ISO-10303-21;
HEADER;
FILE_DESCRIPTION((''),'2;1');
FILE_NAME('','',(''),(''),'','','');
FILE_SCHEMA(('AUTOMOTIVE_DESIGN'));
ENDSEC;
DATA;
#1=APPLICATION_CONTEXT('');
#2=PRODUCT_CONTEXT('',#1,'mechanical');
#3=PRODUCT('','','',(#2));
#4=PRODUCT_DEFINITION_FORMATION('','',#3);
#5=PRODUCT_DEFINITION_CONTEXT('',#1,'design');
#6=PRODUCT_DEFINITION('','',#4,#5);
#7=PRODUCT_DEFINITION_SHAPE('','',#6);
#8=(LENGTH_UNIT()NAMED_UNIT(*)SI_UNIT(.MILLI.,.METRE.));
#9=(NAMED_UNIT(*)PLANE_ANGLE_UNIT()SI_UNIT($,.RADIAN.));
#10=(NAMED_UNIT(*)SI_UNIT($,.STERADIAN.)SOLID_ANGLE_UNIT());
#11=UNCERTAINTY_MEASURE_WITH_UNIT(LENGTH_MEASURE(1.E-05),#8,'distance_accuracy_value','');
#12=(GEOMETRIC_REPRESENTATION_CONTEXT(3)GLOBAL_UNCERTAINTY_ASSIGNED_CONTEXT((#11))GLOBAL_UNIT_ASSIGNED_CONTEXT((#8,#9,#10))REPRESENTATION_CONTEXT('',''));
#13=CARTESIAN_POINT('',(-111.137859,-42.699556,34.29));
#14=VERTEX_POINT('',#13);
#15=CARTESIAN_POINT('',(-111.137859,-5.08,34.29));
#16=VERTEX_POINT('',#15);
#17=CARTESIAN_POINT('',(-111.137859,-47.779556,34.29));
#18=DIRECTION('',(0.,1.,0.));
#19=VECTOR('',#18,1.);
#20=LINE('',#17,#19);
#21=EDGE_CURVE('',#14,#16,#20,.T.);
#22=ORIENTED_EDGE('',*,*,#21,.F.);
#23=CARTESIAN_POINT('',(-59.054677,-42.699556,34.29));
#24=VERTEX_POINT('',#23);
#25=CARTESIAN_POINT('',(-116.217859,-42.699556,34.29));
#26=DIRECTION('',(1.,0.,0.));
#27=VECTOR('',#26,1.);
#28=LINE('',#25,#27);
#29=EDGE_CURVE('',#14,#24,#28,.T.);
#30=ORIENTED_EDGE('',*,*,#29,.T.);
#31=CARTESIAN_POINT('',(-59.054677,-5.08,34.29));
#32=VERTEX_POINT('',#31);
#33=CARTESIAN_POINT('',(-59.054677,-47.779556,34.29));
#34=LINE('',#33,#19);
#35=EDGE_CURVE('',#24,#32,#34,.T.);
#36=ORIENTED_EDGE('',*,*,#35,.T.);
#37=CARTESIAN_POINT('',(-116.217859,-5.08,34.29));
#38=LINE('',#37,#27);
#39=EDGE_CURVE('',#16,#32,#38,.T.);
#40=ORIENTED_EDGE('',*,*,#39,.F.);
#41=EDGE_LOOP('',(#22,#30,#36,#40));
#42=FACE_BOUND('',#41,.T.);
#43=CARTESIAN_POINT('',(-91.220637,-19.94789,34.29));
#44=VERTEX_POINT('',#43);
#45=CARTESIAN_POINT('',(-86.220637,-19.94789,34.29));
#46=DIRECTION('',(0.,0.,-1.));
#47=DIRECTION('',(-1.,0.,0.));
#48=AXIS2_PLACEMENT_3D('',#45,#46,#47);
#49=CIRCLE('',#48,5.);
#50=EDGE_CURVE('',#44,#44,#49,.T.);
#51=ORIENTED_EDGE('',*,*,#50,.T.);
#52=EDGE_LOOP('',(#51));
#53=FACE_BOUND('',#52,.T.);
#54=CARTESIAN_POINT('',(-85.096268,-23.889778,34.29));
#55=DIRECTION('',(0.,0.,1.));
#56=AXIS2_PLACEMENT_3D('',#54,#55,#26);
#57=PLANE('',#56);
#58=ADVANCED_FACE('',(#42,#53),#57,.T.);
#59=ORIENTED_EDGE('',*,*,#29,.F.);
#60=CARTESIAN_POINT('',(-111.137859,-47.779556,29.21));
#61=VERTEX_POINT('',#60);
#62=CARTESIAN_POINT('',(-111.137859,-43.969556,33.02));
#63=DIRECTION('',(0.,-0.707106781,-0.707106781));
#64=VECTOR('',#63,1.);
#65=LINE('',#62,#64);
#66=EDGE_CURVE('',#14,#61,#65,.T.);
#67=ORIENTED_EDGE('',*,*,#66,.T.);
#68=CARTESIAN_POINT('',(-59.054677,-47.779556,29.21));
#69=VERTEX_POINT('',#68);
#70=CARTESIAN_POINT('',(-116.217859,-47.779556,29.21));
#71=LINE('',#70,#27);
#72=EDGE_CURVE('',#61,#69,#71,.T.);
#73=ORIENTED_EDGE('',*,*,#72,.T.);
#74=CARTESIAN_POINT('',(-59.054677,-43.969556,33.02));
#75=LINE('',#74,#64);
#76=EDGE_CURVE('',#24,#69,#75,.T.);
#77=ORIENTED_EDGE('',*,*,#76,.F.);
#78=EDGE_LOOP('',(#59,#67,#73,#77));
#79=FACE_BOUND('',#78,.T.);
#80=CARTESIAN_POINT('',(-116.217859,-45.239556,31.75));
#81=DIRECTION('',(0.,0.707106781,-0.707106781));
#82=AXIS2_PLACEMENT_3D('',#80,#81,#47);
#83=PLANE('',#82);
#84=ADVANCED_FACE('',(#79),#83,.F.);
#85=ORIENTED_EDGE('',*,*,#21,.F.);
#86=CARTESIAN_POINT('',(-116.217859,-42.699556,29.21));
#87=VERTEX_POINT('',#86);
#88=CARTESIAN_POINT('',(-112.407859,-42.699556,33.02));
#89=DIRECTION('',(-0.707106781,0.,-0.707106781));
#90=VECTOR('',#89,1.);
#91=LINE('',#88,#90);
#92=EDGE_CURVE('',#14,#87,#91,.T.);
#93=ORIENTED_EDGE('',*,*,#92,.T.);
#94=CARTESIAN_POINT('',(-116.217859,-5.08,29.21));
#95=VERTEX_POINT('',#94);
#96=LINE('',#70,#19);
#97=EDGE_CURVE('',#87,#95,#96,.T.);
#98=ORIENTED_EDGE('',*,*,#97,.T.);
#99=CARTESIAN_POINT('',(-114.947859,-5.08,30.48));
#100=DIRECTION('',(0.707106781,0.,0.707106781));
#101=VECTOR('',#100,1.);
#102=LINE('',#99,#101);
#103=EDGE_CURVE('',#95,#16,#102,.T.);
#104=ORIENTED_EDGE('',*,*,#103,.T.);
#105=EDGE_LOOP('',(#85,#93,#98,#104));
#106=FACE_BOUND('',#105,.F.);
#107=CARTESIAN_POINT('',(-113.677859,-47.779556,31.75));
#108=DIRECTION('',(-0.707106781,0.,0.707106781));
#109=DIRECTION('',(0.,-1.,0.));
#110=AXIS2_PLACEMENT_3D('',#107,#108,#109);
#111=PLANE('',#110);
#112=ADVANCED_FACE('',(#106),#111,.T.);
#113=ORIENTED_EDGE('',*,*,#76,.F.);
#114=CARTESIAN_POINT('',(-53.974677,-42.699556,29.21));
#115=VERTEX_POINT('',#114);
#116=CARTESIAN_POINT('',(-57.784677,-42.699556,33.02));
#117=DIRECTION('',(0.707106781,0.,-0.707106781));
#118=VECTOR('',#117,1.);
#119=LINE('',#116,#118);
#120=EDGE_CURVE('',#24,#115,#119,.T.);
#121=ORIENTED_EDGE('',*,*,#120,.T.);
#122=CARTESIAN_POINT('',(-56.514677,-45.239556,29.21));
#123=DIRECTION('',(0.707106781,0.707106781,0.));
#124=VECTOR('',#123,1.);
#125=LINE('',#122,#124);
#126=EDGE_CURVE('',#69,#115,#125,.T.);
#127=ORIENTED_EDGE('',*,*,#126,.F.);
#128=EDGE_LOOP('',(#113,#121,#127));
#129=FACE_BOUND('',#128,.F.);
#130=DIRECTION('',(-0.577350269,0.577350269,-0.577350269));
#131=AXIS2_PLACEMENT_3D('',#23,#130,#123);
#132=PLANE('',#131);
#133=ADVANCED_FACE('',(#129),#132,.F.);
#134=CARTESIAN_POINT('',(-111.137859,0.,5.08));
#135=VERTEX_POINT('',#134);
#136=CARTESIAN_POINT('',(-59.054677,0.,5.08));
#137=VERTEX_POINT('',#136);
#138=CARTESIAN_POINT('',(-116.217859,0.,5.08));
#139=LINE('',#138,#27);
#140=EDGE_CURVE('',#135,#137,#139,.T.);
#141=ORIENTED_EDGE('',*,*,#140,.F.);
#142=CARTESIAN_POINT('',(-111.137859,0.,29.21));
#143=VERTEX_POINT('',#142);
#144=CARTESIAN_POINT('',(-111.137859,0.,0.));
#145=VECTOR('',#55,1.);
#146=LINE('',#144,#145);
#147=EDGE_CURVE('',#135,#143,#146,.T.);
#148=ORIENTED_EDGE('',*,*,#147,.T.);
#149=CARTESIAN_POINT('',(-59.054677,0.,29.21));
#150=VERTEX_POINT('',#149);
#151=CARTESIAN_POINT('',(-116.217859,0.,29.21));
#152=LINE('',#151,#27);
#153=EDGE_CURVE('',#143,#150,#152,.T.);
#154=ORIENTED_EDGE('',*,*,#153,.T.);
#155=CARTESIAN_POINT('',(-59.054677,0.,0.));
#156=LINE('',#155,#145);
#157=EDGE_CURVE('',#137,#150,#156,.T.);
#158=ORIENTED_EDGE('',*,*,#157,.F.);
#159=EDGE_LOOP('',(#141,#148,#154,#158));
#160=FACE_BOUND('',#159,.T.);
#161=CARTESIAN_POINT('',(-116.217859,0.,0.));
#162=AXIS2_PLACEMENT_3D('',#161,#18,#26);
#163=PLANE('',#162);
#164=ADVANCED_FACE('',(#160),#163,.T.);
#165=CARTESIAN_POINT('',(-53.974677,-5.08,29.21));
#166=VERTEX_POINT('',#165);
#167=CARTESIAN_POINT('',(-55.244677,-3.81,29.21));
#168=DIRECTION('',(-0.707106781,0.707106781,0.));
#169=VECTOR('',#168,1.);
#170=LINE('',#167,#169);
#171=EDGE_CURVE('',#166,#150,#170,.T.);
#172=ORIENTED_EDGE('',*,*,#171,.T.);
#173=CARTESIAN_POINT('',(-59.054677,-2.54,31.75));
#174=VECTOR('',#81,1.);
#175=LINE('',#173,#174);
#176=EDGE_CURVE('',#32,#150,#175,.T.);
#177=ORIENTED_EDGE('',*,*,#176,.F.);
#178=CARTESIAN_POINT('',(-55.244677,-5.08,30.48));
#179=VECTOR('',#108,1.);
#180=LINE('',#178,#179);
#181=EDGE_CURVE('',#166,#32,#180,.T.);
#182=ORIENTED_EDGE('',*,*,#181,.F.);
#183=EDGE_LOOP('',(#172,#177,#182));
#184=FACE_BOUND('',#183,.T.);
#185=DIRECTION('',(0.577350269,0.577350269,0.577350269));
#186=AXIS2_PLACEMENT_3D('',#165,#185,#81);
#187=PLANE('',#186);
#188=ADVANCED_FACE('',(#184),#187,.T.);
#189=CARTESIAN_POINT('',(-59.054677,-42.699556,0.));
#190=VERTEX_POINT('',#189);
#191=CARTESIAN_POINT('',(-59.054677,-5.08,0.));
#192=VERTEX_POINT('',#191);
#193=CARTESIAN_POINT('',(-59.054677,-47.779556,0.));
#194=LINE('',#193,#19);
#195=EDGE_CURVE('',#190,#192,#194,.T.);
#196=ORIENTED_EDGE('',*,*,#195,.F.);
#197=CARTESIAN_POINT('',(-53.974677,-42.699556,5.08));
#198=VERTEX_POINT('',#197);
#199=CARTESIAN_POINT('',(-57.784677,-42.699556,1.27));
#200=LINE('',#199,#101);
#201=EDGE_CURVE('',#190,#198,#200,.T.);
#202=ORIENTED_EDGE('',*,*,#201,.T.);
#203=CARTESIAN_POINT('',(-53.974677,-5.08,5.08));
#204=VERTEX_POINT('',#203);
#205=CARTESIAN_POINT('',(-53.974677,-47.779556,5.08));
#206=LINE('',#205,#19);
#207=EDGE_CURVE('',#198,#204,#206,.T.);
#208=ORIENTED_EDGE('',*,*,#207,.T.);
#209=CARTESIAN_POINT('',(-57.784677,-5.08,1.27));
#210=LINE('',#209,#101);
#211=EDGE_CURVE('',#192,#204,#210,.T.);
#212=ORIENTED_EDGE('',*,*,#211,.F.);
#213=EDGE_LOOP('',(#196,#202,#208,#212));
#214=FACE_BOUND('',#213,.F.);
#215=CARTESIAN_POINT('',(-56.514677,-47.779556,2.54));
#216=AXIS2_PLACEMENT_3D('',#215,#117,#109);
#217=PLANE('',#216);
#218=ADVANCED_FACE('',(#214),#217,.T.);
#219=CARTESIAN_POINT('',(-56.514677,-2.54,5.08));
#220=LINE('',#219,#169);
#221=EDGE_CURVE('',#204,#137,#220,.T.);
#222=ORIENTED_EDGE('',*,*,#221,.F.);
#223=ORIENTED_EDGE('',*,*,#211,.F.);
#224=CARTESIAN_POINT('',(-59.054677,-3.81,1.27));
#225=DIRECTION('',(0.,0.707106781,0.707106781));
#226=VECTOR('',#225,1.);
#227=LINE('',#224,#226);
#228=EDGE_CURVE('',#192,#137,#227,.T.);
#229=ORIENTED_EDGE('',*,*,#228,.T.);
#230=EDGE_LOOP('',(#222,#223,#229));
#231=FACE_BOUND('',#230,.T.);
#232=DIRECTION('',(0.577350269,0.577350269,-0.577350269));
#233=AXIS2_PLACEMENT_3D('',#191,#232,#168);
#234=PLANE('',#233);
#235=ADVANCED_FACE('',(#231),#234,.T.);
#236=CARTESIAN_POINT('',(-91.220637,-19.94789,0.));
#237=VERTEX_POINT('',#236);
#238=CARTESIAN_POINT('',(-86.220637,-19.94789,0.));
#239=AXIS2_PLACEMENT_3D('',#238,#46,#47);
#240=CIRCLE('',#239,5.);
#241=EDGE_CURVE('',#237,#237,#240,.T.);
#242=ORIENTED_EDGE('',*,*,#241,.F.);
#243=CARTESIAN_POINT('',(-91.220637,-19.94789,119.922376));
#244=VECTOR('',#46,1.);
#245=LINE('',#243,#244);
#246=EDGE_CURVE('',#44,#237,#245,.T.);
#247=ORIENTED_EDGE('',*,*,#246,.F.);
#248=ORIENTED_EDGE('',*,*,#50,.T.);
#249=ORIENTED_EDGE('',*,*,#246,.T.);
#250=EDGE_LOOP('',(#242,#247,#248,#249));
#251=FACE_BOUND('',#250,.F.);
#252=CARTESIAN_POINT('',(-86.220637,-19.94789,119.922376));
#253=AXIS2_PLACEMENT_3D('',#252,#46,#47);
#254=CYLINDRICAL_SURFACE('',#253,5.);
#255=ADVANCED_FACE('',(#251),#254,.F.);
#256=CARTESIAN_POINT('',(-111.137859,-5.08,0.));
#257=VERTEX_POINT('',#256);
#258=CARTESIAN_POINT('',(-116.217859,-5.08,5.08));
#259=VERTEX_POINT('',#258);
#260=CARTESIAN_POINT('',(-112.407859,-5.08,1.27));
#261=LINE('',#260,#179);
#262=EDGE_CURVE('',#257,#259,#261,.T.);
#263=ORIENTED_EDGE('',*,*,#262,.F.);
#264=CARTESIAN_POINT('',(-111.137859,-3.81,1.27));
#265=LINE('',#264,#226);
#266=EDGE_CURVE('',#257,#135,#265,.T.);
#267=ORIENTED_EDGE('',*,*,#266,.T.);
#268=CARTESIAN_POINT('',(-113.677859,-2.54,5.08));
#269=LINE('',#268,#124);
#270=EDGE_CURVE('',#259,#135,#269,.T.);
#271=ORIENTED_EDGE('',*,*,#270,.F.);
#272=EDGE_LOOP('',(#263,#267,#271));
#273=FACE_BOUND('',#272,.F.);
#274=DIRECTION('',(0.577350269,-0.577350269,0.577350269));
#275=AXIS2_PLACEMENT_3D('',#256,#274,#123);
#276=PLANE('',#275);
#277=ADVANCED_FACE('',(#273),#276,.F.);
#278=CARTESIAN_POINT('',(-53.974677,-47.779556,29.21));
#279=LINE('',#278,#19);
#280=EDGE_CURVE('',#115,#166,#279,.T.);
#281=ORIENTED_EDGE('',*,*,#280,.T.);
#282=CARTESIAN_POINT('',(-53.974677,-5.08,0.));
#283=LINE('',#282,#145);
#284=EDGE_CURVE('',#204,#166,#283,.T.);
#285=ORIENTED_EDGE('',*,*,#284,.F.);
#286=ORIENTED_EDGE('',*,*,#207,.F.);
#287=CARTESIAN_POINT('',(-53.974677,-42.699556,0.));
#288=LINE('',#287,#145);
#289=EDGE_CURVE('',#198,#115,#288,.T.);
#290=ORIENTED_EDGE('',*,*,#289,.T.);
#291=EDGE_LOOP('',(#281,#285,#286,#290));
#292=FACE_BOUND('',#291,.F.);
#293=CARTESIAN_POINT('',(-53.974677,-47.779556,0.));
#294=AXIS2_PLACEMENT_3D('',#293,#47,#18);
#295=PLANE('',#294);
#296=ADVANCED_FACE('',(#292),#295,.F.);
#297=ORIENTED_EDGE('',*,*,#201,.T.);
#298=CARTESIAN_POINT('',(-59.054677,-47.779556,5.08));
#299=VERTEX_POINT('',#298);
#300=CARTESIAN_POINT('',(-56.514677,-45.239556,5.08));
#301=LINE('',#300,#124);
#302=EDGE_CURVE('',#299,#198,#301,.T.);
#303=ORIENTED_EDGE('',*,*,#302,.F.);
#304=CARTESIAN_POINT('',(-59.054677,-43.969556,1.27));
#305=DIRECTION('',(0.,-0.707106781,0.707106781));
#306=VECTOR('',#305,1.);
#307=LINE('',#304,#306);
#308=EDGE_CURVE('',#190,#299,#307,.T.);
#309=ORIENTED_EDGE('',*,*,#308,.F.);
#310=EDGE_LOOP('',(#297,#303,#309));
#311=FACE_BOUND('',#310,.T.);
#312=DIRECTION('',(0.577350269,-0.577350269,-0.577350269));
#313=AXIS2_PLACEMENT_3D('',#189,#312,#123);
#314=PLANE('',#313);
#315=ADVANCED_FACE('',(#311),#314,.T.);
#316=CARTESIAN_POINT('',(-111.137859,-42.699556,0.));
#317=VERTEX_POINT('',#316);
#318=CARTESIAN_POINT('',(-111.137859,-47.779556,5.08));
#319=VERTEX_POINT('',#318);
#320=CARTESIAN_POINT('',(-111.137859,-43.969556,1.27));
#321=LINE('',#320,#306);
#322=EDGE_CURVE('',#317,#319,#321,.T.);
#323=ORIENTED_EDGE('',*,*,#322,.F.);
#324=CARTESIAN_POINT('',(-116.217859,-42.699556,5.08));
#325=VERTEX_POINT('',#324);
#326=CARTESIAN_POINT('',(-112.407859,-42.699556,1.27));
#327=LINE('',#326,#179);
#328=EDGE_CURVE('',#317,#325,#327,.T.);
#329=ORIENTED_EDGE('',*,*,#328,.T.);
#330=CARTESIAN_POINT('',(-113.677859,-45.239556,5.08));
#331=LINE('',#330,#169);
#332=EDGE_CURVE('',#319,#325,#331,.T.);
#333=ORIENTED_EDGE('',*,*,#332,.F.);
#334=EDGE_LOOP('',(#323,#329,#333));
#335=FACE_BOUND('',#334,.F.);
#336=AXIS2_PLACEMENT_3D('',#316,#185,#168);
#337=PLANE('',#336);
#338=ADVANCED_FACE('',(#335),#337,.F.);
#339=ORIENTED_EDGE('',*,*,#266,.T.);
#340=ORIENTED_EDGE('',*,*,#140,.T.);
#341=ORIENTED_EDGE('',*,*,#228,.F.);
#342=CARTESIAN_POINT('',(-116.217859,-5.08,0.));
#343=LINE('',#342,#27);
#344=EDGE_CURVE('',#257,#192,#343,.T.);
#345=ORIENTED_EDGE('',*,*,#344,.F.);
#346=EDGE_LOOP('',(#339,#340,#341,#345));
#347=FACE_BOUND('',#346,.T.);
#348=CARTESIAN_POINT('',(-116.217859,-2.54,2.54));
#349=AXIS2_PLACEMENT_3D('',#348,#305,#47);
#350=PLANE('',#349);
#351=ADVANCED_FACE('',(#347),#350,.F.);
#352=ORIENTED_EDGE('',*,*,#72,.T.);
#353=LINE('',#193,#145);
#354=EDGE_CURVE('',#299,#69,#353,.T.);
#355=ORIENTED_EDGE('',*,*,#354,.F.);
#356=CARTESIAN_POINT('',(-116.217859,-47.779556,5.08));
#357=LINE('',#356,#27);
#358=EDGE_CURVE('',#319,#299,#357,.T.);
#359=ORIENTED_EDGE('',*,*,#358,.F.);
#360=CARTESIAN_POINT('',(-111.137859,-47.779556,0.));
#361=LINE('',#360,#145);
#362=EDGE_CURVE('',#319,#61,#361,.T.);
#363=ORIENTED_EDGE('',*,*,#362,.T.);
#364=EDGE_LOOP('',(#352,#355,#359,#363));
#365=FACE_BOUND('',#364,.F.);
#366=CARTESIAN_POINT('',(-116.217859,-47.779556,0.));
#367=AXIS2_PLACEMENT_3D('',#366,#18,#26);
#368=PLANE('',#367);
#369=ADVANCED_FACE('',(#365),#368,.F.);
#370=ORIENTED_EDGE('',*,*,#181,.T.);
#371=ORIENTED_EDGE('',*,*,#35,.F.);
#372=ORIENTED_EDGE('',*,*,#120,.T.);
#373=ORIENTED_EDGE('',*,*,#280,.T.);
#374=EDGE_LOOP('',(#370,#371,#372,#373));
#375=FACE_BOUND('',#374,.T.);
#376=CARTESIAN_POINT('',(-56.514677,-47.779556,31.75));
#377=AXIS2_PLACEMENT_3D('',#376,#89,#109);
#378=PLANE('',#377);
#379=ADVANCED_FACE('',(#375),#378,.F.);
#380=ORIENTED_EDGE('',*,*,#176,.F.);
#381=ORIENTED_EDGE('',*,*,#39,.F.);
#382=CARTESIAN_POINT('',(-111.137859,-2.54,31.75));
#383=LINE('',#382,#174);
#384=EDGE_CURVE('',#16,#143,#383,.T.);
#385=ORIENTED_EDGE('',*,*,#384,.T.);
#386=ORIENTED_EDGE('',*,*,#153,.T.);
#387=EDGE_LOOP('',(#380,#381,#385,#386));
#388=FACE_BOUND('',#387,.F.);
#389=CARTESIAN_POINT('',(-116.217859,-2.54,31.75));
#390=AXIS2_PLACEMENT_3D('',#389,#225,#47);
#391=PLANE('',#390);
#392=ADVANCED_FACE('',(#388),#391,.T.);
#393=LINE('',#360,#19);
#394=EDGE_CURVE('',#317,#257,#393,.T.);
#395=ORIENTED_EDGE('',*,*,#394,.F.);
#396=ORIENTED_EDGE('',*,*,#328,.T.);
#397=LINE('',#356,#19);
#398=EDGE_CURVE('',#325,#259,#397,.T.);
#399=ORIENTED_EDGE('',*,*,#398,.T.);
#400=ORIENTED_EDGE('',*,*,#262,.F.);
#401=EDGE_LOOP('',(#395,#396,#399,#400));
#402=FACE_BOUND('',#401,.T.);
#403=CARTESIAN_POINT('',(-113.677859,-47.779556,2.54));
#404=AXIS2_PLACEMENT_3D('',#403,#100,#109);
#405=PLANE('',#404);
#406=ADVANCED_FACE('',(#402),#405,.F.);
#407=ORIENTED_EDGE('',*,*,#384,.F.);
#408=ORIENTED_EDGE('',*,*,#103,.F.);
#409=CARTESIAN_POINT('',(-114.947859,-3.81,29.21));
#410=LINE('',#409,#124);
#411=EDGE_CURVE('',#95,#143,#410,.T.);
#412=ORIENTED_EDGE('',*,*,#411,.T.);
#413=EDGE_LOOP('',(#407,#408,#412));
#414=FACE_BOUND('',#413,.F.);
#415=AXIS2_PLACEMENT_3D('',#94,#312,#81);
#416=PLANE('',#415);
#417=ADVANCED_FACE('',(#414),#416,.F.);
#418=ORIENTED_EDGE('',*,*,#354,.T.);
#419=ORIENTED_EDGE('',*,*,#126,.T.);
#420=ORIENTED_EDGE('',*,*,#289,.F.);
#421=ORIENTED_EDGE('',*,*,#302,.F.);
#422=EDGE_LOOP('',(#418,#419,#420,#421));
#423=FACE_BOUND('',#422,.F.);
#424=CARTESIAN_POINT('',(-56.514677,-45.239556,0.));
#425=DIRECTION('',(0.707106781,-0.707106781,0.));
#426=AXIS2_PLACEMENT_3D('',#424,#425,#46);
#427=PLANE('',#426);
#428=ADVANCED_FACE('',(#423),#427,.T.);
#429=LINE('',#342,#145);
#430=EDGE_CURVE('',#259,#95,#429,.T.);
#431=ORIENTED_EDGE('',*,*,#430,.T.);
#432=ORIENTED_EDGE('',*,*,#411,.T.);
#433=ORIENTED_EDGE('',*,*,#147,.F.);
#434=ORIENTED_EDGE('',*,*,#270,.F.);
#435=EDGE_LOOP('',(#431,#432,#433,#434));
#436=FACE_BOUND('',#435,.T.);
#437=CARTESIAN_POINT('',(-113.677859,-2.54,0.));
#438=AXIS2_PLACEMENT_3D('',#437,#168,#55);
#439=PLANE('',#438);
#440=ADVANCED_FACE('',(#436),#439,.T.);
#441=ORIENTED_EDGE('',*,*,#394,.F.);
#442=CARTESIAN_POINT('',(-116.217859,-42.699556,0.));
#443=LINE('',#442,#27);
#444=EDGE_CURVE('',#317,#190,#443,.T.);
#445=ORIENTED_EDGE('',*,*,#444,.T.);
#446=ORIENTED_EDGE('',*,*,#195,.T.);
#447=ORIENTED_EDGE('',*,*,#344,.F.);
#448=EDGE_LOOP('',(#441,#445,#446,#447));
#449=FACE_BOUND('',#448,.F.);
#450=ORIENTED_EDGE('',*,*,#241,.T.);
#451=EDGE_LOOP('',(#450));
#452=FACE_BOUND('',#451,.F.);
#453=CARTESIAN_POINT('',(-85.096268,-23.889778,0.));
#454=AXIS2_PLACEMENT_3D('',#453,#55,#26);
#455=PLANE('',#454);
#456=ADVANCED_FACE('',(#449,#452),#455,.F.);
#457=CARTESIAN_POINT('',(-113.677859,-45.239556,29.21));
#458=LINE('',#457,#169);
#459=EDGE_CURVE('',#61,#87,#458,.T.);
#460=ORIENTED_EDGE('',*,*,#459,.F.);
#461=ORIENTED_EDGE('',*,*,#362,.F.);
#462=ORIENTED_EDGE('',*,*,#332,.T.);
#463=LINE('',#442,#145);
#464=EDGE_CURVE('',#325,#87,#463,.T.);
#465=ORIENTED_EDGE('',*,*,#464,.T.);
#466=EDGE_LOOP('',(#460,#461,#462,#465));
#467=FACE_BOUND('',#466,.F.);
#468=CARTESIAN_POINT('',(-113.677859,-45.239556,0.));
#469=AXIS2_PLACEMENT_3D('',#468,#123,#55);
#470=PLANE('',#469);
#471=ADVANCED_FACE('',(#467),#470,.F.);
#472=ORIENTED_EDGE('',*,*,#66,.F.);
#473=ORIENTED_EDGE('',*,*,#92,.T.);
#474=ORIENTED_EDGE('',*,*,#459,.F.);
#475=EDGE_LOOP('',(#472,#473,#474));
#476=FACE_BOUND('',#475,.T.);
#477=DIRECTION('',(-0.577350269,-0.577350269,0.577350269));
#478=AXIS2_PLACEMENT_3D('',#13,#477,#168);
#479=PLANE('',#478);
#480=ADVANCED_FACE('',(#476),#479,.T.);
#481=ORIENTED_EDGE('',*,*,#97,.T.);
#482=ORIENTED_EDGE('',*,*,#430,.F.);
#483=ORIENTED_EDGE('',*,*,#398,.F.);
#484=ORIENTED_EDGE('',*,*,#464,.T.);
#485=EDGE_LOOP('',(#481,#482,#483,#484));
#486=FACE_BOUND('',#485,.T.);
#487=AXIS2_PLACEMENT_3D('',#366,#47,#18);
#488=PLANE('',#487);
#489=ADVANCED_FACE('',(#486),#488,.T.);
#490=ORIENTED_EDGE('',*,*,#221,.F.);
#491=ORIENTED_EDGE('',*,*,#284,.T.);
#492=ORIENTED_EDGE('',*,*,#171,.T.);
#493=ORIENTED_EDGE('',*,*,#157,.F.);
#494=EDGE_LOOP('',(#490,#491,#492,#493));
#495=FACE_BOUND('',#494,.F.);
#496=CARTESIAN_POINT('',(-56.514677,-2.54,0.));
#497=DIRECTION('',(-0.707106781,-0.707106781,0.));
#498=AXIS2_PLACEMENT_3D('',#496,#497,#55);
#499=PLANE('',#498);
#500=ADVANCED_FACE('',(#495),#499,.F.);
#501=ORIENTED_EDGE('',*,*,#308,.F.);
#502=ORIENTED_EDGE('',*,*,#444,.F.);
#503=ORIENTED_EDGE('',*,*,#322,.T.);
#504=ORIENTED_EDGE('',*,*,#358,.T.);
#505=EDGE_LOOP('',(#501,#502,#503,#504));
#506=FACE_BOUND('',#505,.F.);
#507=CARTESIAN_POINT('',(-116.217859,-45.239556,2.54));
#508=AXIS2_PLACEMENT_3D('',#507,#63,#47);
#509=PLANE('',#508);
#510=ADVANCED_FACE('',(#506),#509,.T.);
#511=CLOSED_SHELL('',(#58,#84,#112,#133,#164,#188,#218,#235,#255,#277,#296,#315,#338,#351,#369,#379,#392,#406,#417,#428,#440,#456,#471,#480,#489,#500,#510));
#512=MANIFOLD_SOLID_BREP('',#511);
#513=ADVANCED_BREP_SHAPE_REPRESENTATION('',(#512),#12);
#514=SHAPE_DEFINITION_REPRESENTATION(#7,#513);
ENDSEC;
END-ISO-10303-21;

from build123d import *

# Parameters (mm, degrees)
F0_W     = 62.2431822121
F0_H     = 47.7795563638
F1_DEPTH = 34.29
F2_SIZE  = 5.08
F4_D     = 10


with BuildPart() as f1:
    # F0 (on Top) → F1 (new body)
    with BuildSketch(Plane.XY):
        with Locations((-85.0962679833, -23.8897781819)):
            Rectangle(F0_W, F0_H)
    extrude(amount=F1_DEPTH)

    # F2
    f2_edges = [f1.edges().sort_by_distance(p)[0] for p in [
        (-116.217859, -47.779556, 17.145),
        (-53.974677, -47.779556, 17.145),
        (-85.096268, -47.779556, 0),
        (-85.096268, -47.779556, 34.29),
        (-85.096268, 0, 34.29),
        (-116.217859, -23.889778, 34.29),
        (-53.974677, -23.889778, 34.29),
        (-53.974677, 0, 17.145),
        (-53.974677, -23.889778, 0),
        (-116.217859, 0, 17.145),
        (-116.217859, -23.889778, 0),
        (-85.096268, 0, 0),
    ]]
    chamfer(f2_edges, length=F2_SIZE)

    # F4 (through all)
    with Locations(Plane.XY.offset(34.29)):
        with Locations((-86.2206369638, -19.9478901923)):
            Hole(F4_D / 2)


solid = f1.part
